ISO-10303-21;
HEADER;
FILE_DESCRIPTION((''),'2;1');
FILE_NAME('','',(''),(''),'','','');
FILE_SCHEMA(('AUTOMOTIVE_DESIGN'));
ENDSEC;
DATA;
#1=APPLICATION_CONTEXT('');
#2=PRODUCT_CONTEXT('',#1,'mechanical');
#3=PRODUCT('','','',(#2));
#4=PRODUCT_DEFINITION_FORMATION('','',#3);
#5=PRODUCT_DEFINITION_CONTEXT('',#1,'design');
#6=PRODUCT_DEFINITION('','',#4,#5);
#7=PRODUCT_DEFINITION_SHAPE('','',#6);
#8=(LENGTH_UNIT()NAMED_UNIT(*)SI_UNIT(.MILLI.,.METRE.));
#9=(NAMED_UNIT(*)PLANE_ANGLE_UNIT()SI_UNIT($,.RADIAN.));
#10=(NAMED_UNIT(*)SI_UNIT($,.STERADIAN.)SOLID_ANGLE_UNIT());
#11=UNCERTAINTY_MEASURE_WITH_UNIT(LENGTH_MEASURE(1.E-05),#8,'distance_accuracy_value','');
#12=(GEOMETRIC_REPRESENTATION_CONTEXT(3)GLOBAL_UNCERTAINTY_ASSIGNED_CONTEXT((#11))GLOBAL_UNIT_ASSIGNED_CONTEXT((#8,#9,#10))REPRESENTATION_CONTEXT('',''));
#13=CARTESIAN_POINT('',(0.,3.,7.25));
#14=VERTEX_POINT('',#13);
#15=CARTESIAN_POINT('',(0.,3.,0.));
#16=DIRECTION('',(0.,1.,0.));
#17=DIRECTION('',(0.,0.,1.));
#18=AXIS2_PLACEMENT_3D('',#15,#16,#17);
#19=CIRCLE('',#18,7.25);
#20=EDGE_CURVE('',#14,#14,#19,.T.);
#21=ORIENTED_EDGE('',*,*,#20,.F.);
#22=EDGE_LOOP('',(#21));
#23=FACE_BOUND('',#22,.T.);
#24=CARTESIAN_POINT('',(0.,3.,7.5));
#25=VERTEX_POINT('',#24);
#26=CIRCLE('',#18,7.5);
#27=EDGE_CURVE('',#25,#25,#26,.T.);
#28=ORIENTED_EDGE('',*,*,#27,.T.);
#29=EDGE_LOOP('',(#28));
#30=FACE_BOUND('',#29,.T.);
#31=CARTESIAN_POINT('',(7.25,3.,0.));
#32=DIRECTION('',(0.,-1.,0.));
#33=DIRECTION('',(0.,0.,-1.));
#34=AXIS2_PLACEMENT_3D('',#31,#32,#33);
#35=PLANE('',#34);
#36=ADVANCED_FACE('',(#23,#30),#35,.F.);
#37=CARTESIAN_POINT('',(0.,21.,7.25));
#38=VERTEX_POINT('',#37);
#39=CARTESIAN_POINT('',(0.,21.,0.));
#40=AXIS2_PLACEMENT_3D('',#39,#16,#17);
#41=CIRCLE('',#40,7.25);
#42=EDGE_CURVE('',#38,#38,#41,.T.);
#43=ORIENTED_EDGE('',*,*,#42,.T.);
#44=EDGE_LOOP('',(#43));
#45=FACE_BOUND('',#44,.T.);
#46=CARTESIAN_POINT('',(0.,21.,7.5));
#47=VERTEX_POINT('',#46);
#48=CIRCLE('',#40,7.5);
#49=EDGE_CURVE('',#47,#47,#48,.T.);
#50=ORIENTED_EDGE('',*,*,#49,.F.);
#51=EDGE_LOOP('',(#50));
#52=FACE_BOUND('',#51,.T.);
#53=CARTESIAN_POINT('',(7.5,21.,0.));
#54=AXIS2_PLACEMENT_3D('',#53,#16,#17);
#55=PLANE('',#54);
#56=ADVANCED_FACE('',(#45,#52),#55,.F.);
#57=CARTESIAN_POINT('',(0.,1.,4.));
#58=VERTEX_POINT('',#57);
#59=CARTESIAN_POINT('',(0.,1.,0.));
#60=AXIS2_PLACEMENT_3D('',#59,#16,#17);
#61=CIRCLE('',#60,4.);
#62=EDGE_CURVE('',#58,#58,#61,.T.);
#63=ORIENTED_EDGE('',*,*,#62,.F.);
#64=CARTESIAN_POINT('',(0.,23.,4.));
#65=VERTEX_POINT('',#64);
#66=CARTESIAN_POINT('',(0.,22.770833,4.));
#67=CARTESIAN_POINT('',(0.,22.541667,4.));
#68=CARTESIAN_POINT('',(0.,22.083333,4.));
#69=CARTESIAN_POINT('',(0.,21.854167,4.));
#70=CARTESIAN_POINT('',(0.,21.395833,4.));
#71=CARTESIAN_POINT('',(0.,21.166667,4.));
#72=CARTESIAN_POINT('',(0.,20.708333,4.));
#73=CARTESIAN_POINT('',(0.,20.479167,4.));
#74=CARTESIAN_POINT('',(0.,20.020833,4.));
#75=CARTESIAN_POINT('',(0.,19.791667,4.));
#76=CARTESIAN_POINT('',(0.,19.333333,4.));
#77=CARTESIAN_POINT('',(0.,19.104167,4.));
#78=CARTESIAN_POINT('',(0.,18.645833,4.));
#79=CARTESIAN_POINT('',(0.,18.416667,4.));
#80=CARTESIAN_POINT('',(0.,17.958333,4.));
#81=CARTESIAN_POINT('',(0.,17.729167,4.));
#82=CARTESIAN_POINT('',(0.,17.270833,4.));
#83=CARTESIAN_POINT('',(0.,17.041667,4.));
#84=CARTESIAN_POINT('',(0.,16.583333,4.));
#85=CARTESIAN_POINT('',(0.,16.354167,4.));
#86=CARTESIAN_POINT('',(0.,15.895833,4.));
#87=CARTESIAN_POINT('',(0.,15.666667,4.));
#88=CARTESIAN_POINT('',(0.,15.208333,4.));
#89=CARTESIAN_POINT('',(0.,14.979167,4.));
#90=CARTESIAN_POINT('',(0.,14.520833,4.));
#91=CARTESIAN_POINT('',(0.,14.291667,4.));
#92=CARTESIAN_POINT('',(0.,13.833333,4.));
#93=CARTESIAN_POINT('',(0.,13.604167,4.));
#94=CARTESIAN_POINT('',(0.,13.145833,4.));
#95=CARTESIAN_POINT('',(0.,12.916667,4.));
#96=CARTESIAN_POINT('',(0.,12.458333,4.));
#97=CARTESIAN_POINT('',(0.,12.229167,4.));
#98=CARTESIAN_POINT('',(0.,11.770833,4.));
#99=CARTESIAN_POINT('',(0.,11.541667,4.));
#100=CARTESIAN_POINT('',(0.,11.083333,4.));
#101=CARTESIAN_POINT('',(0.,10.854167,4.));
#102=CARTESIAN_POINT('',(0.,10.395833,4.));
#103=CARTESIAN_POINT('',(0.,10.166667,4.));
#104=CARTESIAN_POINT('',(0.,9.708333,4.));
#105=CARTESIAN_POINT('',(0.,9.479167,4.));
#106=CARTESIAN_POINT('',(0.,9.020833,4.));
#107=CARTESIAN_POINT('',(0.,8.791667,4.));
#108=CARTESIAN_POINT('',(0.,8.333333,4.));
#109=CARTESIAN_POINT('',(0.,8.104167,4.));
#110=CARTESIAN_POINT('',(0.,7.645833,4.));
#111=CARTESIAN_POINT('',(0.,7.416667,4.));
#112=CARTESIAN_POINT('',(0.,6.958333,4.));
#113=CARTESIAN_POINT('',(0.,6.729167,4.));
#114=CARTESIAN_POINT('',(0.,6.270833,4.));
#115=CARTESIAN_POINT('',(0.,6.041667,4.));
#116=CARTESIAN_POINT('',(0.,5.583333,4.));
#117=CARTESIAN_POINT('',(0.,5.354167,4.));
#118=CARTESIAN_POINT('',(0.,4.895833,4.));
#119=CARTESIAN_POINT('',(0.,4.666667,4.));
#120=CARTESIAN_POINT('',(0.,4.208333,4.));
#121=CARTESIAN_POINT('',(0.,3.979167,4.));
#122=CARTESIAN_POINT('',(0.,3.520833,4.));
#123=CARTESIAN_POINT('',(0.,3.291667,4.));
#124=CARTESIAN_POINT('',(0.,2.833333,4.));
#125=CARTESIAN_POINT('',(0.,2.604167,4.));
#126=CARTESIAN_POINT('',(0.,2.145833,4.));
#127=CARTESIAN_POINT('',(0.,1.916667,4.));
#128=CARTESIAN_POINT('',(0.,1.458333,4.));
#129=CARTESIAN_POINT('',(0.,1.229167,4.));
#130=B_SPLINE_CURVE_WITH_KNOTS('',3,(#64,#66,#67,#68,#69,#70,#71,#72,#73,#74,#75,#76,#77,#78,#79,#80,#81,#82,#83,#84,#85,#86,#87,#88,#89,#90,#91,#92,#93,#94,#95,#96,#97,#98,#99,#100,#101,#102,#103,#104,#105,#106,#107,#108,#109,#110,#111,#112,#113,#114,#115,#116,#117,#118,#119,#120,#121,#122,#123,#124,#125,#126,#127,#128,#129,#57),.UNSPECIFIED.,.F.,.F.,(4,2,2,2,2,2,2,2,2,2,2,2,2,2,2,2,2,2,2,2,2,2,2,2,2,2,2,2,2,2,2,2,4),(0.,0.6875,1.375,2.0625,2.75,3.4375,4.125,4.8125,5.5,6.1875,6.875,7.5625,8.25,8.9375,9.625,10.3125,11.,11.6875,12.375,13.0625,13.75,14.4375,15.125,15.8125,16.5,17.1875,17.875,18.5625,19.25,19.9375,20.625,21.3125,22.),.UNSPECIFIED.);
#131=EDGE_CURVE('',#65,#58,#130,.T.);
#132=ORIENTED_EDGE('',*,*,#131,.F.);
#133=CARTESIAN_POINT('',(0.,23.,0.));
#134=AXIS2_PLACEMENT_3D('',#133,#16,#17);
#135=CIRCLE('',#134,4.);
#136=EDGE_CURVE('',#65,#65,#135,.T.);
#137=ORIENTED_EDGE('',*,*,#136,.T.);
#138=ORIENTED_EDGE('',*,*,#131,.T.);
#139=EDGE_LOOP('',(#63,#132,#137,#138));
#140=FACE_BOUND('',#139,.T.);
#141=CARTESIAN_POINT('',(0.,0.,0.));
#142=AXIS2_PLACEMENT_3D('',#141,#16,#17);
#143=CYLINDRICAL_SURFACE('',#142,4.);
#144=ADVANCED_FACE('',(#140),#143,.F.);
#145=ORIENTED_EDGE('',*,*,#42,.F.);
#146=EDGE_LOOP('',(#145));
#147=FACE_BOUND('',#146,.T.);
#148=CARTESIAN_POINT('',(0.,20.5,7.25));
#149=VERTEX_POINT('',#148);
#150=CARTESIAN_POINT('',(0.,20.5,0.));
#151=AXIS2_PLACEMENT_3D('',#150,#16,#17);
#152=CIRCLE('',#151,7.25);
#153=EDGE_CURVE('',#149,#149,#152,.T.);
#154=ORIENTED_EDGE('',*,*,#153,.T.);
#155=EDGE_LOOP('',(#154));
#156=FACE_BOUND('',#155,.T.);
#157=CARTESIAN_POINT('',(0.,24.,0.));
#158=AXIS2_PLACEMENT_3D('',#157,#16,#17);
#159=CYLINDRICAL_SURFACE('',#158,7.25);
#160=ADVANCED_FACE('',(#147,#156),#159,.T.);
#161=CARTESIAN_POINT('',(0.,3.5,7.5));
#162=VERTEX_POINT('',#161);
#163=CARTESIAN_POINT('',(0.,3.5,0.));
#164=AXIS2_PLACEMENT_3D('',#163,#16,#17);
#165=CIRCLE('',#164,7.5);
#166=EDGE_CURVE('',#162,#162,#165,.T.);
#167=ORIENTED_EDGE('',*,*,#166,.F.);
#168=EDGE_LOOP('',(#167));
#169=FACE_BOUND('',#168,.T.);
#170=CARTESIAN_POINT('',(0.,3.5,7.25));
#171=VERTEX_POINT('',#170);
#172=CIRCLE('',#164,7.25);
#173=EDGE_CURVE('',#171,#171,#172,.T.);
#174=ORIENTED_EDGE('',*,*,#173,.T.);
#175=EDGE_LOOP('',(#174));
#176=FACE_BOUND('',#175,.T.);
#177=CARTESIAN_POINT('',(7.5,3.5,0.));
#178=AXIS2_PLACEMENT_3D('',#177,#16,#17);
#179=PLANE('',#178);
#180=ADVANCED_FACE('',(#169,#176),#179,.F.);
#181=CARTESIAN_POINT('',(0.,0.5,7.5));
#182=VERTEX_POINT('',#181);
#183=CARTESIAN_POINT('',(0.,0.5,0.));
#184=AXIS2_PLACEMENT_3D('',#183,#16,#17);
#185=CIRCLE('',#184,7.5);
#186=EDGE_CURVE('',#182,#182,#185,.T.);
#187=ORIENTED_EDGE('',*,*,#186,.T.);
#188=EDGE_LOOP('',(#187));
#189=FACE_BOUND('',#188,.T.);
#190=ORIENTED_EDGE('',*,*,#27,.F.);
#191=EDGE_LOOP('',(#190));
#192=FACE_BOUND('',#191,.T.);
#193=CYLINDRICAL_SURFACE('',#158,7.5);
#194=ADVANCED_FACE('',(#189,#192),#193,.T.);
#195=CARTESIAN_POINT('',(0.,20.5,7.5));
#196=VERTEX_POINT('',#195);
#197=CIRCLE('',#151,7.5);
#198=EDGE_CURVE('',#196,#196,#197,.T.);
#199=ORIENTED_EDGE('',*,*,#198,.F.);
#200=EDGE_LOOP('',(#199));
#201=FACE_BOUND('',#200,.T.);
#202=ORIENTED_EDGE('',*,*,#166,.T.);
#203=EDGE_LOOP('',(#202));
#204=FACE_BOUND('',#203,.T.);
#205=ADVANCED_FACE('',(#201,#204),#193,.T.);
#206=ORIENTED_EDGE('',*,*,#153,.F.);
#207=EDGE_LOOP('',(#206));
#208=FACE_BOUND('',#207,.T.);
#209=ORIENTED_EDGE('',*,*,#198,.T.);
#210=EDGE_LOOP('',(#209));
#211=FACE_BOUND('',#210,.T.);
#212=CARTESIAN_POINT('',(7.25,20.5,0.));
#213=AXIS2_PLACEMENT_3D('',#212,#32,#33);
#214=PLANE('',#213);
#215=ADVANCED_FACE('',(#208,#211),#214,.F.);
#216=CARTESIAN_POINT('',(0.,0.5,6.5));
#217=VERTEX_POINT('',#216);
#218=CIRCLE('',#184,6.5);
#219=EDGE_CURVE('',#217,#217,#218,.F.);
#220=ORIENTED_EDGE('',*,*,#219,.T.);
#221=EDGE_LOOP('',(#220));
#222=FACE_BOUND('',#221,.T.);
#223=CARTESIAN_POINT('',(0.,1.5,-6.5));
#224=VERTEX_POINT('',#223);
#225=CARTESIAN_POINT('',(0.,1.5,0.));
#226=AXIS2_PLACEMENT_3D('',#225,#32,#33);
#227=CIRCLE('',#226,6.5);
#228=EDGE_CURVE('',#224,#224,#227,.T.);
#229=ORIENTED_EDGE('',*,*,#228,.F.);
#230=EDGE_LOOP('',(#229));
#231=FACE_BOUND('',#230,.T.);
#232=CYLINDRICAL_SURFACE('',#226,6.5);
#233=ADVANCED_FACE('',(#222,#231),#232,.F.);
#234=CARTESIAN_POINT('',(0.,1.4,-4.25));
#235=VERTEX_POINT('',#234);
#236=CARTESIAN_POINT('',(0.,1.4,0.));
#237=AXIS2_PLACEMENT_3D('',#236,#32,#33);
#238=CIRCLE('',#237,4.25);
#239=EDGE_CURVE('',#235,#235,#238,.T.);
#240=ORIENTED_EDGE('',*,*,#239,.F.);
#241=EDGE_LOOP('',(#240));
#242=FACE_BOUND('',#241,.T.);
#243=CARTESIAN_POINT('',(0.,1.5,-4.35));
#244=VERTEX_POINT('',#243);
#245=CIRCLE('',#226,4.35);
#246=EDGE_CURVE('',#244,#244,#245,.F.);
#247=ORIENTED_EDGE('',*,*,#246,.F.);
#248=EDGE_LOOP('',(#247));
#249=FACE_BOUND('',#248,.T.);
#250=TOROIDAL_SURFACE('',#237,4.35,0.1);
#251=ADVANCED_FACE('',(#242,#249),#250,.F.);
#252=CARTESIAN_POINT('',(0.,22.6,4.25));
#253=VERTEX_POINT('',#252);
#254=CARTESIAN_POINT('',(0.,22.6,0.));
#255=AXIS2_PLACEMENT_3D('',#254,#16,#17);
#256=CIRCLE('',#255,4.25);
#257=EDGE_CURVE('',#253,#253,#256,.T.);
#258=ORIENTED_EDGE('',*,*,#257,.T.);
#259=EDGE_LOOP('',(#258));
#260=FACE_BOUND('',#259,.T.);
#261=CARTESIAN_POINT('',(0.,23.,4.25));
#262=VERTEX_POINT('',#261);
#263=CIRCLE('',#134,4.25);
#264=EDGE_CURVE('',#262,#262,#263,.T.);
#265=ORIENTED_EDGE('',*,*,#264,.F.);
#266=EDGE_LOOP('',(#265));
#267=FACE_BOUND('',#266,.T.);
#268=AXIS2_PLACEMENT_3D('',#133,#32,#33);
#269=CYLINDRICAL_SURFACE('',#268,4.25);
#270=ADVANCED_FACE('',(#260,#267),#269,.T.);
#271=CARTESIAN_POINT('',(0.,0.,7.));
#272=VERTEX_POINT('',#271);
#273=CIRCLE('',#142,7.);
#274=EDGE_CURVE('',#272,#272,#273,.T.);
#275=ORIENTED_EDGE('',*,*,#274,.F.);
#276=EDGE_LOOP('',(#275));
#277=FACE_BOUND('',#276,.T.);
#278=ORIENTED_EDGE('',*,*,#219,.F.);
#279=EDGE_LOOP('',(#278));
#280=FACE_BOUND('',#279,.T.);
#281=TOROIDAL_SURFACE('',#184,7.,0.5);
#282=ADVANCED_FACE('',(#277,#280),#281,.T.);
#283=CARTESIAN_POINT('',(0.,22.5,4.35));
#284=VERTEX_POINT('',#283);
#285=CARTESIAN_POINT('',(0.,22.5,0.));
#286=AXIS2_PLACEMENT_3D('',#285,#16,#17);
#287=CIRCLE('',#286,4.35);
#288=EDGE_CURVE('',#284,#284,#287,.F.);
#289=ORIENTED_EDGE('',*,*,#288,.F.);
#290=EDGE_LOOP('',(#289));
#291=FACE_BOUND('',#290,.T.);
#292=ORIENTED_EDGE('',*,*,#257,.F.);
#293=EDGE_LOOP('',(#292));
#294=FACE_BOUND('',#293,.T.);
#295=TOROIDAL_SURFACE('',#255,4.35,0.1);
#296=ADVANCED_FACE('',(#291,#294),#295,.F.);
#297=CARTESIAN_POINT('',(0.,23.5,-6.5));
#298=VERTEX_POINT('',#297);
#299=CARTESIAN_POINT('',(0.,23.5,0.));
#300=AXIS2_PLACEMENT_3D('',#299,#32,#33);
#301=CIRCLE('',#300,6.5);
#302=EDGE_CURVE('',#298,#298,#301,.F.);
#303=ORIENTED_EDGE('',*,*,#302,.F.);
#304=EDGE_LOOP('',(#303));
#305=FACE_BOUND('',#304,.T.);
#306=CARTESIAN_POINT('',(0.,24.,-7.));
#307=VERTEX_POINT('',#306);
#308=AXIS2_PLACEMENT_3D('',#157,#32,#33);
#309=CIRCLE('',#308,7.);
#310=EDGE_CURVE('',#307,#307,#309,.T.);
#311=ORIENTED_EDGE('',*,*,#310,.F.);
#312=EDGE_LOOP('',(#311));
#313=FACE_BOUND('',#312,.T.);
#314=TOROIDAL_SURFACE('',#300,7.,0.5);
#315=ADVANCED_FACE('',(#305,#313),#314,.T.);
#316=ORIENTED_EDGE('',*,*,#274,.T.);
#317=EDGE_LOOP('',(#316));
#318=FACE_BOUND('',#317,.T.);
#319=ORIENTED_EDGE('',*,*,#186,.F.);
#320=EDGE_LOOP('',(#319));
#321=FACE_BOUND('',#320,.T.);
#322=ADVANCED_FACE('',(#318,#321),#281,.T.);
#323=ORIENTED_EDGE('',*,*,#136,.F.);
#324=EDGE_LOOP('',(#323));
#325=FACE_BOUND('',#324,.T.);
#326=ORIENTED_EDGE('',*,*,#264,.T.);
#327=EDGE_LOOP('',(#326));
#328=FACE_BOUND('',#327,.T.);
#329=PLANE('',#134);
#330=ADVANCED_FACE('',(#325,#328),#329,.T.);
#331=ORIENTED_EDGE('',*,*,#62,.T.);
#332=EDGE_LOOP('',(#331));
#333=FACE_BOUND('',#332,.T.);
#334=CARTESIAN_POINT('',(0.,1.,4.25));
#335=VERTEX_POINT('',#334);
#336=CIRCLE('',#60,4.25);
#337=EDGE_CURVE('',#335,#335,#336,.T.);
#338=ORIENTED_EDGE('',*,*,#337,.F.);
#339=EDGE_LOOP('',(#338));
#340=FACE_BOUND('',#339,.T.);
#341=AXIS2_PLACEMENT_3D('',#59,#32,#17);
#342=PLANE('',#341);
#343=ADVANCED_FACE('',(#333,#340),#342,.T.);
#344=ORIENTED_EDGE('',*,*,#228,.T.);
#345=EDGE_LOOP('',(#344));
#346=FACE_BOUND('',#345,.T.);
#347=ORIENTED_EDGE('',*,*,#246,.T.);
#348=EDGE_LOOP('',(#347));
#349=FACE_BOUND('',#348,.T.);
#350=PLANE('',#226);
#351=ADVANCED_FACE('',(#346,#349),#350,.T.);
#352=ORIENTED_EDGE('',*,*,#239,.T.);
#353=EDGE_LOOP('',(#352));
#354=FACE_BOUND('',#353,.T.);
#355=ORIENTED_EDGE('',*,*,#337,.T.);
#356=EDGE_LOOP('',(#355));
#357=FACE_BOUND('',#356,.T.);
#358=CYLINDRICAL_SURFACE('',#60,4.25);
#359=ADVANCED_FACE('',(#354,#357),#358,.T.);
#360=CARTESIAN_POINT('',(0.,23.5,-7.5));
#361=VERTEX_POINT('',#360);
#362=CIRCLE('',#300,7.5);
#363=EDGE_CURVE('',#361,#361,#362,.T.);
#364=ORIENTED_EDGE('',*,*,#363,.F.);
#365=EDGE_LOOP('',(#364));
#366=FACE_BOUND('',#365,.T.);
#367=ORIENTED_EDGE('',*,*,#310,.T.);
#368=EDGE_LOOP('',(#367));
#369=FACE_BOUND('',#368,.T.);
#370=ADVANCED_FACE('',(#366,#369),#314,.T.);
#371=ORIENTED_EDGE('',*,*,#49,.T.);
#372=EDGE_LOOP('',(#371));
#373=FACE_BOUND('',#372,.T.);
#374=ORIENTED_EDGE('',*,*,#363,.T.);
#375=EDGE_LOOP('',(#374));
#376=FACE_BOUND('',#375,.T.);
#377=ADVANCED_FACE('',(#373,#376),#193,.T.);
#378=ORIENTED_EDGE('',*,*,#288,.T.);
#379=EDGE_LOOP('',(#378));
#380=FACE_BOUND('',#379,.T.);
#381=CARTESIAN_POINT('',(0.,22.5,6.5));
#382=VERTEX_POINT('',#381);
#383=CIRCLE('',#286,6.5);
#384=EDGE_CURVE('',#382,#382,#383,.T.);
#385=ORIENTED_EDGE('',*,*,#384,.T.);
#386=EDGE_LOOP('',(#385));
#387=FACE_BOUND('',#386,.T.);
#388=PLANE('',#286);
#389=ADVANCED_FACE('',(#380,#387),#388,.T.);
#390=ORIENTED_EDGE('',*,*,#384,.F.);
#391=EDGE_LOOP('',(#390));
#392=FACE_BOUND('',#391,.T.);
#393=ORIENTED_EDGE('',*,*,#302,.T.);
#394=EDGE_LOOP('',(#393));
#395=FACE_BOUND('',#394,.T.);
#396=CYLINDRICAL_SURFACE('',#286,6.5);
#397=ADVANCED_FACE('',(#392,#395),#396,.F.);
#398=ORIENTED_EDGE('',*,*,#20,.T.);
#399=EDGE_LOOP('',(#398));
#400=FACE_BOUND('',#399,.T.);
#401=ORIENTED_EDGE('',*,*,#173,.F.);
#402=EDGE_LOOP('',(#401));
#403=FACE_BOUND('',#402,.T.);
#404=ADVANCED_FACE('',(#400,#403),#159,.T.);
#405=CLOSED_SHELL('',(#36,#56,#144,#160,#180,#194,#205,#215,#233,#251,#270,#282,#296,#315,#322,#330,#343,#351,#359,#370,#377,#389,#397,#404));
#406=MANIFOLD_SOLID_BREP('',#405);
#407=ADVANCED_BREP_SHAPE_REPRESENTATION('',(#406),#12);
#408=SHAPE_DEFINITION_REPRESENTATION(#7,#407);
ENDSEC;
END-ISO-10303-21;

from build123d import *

# Parameters (mm, degrees)
SKETCH2_R           = 6.5
CUT_EXTRUDE1_DEPTH  = 1.5
CUT_EXTRUDE2_START  = -1.5
SKETCH3_R           = 6.5
CUT_EXTRUDE2_DEPTH  = 1.5
SKETCH4_R           = 4
CUT_EXTRUDE3_DEPTH  = 25.874685928
BOSS_EXTRUDE1_START = 0.5
SKETCH5_R           = 4.25
SKETCH5_R_2         = 4
BOSS_EXTRUDE1_DEPTH = 0.5
FILLET2_R           = 0.5
FILLET3_R           = 0.5
FILLET4_R           = 0.1


with BuildPart() as part:
    # Sketch1 → Revolve1 (revolve)
    with BuildSketch(Plane.XY, mode=Mode.PRIVATE) as revolve1_sk:
        Polygon((0, 24), (0, 0), (7.5, 0), (7.5, 3), (7.25, 3), (7.25, 3.5), (7.5, 3.5), (7.5, 20.5), (7.25, 20.5), (7.25, 21), (7.5, 21), (7.5, 24), align=None)
    revolve(revolve1_sk.sketch.rotate(Axis((0, 24, 0), (0, -1, 0)), 90), axis=Axis((0, 24, 0), (0, -1, 0)))

    # Sketch2 → Cut-Extrude1 (cut)
    with BuildSketch(Plane(origin=(0, 24, 0), x_dir=(1, 0, 0), z_dir=(0, 1, 0))):
        with Locations(Location((0, 0, 0), (0, 0, 270))):
            Circle(SKETCH2_R)
    extrude(amount=-CUT_EXTRUDE1_DEPTH, mode=Mode.SUBTRACT)

    # Sketch3 → Cut-Extrude2 (cut)
    with BuildSketch(Plane.XZ.offset(CUT_EXTRUDE2_START)):
        with Locations(Location((0, 0, 0), (0, 0, 90))):
            Circle(SKETCH3_R)
    extrude(amount=CUT_EXTRUDE2_DEPTH, mode=Mode.SUBTRACT)

    # Sketch4 → Cut-Extrude3 (cut, through all)
    with BuildSketch(Plane(origin=(0, 22.5, 0), x_dir=(1, 0, 0), z_dir=(0, 1, 0))):
        with Locations(Location((0, 0, 0), (0, 0, 270))):
            Circle(SKETCH4_R)
    extrude(amount=-CUT_EXTRUDE3_DEPTH, mode=Mode.SUBTRACT)

    # Sketch5 → Boss-Extrude1 (add)
    with BuildSketch(Plane(origin=(0, 22.5, 0), x_dir=(1, 0, 0), z_dir=(0, 1, 0)).offset(BOSS_EXTRUDE1_START)):
        with Locations(Location((0, 0, 0), (0, 0, 270))):
            Circle(SKETCH5_R)
        with Locations(Location((0, 0, 0), (0, 0, 270))):
            Circle(SKETCH5_R_2, mode=Mode.SUBTRACT)
    boss_extrude1 = extrude(amount=-BOSS_EXTRUDE1_DEPTH)

    # Mirror1: Boss-Extrude1 across plane
    add(boss_extrude1.mirror(Plane.ZX.offset(12)))

    # Fillet2
    fillet2_edges = [part.edges().sort_by_distance(p)[0] for p in [
        (0, 24, -7.5),
        (0, 24, -6.5),
    ]]
    fillet(fillet2_edges, radius=FILLET2_R - 0.0001)  # a hair under: the kernel refuses the full size

    # Fillet3
    fillet3_edges = [part.edges().sort_by_distance(p)[0] for p in [
        (0, 0, -7.5),
        (0, 0, -6.5),
    ]]
    fillet(fillet3_edges, radius=FILLET3_R - 0.0001)  # a hair under: the kernel refuses the full size

    # Fillet4
    fillet4_edges = [part.edges().sort_by_distance(p)[0] for p in [
        (0, 22.5, -4.25),
        (0, 1.5, -4.25),
    ]]
    fillet(fillet4_edges, radius=FILLET4_R)


solid = part.part
